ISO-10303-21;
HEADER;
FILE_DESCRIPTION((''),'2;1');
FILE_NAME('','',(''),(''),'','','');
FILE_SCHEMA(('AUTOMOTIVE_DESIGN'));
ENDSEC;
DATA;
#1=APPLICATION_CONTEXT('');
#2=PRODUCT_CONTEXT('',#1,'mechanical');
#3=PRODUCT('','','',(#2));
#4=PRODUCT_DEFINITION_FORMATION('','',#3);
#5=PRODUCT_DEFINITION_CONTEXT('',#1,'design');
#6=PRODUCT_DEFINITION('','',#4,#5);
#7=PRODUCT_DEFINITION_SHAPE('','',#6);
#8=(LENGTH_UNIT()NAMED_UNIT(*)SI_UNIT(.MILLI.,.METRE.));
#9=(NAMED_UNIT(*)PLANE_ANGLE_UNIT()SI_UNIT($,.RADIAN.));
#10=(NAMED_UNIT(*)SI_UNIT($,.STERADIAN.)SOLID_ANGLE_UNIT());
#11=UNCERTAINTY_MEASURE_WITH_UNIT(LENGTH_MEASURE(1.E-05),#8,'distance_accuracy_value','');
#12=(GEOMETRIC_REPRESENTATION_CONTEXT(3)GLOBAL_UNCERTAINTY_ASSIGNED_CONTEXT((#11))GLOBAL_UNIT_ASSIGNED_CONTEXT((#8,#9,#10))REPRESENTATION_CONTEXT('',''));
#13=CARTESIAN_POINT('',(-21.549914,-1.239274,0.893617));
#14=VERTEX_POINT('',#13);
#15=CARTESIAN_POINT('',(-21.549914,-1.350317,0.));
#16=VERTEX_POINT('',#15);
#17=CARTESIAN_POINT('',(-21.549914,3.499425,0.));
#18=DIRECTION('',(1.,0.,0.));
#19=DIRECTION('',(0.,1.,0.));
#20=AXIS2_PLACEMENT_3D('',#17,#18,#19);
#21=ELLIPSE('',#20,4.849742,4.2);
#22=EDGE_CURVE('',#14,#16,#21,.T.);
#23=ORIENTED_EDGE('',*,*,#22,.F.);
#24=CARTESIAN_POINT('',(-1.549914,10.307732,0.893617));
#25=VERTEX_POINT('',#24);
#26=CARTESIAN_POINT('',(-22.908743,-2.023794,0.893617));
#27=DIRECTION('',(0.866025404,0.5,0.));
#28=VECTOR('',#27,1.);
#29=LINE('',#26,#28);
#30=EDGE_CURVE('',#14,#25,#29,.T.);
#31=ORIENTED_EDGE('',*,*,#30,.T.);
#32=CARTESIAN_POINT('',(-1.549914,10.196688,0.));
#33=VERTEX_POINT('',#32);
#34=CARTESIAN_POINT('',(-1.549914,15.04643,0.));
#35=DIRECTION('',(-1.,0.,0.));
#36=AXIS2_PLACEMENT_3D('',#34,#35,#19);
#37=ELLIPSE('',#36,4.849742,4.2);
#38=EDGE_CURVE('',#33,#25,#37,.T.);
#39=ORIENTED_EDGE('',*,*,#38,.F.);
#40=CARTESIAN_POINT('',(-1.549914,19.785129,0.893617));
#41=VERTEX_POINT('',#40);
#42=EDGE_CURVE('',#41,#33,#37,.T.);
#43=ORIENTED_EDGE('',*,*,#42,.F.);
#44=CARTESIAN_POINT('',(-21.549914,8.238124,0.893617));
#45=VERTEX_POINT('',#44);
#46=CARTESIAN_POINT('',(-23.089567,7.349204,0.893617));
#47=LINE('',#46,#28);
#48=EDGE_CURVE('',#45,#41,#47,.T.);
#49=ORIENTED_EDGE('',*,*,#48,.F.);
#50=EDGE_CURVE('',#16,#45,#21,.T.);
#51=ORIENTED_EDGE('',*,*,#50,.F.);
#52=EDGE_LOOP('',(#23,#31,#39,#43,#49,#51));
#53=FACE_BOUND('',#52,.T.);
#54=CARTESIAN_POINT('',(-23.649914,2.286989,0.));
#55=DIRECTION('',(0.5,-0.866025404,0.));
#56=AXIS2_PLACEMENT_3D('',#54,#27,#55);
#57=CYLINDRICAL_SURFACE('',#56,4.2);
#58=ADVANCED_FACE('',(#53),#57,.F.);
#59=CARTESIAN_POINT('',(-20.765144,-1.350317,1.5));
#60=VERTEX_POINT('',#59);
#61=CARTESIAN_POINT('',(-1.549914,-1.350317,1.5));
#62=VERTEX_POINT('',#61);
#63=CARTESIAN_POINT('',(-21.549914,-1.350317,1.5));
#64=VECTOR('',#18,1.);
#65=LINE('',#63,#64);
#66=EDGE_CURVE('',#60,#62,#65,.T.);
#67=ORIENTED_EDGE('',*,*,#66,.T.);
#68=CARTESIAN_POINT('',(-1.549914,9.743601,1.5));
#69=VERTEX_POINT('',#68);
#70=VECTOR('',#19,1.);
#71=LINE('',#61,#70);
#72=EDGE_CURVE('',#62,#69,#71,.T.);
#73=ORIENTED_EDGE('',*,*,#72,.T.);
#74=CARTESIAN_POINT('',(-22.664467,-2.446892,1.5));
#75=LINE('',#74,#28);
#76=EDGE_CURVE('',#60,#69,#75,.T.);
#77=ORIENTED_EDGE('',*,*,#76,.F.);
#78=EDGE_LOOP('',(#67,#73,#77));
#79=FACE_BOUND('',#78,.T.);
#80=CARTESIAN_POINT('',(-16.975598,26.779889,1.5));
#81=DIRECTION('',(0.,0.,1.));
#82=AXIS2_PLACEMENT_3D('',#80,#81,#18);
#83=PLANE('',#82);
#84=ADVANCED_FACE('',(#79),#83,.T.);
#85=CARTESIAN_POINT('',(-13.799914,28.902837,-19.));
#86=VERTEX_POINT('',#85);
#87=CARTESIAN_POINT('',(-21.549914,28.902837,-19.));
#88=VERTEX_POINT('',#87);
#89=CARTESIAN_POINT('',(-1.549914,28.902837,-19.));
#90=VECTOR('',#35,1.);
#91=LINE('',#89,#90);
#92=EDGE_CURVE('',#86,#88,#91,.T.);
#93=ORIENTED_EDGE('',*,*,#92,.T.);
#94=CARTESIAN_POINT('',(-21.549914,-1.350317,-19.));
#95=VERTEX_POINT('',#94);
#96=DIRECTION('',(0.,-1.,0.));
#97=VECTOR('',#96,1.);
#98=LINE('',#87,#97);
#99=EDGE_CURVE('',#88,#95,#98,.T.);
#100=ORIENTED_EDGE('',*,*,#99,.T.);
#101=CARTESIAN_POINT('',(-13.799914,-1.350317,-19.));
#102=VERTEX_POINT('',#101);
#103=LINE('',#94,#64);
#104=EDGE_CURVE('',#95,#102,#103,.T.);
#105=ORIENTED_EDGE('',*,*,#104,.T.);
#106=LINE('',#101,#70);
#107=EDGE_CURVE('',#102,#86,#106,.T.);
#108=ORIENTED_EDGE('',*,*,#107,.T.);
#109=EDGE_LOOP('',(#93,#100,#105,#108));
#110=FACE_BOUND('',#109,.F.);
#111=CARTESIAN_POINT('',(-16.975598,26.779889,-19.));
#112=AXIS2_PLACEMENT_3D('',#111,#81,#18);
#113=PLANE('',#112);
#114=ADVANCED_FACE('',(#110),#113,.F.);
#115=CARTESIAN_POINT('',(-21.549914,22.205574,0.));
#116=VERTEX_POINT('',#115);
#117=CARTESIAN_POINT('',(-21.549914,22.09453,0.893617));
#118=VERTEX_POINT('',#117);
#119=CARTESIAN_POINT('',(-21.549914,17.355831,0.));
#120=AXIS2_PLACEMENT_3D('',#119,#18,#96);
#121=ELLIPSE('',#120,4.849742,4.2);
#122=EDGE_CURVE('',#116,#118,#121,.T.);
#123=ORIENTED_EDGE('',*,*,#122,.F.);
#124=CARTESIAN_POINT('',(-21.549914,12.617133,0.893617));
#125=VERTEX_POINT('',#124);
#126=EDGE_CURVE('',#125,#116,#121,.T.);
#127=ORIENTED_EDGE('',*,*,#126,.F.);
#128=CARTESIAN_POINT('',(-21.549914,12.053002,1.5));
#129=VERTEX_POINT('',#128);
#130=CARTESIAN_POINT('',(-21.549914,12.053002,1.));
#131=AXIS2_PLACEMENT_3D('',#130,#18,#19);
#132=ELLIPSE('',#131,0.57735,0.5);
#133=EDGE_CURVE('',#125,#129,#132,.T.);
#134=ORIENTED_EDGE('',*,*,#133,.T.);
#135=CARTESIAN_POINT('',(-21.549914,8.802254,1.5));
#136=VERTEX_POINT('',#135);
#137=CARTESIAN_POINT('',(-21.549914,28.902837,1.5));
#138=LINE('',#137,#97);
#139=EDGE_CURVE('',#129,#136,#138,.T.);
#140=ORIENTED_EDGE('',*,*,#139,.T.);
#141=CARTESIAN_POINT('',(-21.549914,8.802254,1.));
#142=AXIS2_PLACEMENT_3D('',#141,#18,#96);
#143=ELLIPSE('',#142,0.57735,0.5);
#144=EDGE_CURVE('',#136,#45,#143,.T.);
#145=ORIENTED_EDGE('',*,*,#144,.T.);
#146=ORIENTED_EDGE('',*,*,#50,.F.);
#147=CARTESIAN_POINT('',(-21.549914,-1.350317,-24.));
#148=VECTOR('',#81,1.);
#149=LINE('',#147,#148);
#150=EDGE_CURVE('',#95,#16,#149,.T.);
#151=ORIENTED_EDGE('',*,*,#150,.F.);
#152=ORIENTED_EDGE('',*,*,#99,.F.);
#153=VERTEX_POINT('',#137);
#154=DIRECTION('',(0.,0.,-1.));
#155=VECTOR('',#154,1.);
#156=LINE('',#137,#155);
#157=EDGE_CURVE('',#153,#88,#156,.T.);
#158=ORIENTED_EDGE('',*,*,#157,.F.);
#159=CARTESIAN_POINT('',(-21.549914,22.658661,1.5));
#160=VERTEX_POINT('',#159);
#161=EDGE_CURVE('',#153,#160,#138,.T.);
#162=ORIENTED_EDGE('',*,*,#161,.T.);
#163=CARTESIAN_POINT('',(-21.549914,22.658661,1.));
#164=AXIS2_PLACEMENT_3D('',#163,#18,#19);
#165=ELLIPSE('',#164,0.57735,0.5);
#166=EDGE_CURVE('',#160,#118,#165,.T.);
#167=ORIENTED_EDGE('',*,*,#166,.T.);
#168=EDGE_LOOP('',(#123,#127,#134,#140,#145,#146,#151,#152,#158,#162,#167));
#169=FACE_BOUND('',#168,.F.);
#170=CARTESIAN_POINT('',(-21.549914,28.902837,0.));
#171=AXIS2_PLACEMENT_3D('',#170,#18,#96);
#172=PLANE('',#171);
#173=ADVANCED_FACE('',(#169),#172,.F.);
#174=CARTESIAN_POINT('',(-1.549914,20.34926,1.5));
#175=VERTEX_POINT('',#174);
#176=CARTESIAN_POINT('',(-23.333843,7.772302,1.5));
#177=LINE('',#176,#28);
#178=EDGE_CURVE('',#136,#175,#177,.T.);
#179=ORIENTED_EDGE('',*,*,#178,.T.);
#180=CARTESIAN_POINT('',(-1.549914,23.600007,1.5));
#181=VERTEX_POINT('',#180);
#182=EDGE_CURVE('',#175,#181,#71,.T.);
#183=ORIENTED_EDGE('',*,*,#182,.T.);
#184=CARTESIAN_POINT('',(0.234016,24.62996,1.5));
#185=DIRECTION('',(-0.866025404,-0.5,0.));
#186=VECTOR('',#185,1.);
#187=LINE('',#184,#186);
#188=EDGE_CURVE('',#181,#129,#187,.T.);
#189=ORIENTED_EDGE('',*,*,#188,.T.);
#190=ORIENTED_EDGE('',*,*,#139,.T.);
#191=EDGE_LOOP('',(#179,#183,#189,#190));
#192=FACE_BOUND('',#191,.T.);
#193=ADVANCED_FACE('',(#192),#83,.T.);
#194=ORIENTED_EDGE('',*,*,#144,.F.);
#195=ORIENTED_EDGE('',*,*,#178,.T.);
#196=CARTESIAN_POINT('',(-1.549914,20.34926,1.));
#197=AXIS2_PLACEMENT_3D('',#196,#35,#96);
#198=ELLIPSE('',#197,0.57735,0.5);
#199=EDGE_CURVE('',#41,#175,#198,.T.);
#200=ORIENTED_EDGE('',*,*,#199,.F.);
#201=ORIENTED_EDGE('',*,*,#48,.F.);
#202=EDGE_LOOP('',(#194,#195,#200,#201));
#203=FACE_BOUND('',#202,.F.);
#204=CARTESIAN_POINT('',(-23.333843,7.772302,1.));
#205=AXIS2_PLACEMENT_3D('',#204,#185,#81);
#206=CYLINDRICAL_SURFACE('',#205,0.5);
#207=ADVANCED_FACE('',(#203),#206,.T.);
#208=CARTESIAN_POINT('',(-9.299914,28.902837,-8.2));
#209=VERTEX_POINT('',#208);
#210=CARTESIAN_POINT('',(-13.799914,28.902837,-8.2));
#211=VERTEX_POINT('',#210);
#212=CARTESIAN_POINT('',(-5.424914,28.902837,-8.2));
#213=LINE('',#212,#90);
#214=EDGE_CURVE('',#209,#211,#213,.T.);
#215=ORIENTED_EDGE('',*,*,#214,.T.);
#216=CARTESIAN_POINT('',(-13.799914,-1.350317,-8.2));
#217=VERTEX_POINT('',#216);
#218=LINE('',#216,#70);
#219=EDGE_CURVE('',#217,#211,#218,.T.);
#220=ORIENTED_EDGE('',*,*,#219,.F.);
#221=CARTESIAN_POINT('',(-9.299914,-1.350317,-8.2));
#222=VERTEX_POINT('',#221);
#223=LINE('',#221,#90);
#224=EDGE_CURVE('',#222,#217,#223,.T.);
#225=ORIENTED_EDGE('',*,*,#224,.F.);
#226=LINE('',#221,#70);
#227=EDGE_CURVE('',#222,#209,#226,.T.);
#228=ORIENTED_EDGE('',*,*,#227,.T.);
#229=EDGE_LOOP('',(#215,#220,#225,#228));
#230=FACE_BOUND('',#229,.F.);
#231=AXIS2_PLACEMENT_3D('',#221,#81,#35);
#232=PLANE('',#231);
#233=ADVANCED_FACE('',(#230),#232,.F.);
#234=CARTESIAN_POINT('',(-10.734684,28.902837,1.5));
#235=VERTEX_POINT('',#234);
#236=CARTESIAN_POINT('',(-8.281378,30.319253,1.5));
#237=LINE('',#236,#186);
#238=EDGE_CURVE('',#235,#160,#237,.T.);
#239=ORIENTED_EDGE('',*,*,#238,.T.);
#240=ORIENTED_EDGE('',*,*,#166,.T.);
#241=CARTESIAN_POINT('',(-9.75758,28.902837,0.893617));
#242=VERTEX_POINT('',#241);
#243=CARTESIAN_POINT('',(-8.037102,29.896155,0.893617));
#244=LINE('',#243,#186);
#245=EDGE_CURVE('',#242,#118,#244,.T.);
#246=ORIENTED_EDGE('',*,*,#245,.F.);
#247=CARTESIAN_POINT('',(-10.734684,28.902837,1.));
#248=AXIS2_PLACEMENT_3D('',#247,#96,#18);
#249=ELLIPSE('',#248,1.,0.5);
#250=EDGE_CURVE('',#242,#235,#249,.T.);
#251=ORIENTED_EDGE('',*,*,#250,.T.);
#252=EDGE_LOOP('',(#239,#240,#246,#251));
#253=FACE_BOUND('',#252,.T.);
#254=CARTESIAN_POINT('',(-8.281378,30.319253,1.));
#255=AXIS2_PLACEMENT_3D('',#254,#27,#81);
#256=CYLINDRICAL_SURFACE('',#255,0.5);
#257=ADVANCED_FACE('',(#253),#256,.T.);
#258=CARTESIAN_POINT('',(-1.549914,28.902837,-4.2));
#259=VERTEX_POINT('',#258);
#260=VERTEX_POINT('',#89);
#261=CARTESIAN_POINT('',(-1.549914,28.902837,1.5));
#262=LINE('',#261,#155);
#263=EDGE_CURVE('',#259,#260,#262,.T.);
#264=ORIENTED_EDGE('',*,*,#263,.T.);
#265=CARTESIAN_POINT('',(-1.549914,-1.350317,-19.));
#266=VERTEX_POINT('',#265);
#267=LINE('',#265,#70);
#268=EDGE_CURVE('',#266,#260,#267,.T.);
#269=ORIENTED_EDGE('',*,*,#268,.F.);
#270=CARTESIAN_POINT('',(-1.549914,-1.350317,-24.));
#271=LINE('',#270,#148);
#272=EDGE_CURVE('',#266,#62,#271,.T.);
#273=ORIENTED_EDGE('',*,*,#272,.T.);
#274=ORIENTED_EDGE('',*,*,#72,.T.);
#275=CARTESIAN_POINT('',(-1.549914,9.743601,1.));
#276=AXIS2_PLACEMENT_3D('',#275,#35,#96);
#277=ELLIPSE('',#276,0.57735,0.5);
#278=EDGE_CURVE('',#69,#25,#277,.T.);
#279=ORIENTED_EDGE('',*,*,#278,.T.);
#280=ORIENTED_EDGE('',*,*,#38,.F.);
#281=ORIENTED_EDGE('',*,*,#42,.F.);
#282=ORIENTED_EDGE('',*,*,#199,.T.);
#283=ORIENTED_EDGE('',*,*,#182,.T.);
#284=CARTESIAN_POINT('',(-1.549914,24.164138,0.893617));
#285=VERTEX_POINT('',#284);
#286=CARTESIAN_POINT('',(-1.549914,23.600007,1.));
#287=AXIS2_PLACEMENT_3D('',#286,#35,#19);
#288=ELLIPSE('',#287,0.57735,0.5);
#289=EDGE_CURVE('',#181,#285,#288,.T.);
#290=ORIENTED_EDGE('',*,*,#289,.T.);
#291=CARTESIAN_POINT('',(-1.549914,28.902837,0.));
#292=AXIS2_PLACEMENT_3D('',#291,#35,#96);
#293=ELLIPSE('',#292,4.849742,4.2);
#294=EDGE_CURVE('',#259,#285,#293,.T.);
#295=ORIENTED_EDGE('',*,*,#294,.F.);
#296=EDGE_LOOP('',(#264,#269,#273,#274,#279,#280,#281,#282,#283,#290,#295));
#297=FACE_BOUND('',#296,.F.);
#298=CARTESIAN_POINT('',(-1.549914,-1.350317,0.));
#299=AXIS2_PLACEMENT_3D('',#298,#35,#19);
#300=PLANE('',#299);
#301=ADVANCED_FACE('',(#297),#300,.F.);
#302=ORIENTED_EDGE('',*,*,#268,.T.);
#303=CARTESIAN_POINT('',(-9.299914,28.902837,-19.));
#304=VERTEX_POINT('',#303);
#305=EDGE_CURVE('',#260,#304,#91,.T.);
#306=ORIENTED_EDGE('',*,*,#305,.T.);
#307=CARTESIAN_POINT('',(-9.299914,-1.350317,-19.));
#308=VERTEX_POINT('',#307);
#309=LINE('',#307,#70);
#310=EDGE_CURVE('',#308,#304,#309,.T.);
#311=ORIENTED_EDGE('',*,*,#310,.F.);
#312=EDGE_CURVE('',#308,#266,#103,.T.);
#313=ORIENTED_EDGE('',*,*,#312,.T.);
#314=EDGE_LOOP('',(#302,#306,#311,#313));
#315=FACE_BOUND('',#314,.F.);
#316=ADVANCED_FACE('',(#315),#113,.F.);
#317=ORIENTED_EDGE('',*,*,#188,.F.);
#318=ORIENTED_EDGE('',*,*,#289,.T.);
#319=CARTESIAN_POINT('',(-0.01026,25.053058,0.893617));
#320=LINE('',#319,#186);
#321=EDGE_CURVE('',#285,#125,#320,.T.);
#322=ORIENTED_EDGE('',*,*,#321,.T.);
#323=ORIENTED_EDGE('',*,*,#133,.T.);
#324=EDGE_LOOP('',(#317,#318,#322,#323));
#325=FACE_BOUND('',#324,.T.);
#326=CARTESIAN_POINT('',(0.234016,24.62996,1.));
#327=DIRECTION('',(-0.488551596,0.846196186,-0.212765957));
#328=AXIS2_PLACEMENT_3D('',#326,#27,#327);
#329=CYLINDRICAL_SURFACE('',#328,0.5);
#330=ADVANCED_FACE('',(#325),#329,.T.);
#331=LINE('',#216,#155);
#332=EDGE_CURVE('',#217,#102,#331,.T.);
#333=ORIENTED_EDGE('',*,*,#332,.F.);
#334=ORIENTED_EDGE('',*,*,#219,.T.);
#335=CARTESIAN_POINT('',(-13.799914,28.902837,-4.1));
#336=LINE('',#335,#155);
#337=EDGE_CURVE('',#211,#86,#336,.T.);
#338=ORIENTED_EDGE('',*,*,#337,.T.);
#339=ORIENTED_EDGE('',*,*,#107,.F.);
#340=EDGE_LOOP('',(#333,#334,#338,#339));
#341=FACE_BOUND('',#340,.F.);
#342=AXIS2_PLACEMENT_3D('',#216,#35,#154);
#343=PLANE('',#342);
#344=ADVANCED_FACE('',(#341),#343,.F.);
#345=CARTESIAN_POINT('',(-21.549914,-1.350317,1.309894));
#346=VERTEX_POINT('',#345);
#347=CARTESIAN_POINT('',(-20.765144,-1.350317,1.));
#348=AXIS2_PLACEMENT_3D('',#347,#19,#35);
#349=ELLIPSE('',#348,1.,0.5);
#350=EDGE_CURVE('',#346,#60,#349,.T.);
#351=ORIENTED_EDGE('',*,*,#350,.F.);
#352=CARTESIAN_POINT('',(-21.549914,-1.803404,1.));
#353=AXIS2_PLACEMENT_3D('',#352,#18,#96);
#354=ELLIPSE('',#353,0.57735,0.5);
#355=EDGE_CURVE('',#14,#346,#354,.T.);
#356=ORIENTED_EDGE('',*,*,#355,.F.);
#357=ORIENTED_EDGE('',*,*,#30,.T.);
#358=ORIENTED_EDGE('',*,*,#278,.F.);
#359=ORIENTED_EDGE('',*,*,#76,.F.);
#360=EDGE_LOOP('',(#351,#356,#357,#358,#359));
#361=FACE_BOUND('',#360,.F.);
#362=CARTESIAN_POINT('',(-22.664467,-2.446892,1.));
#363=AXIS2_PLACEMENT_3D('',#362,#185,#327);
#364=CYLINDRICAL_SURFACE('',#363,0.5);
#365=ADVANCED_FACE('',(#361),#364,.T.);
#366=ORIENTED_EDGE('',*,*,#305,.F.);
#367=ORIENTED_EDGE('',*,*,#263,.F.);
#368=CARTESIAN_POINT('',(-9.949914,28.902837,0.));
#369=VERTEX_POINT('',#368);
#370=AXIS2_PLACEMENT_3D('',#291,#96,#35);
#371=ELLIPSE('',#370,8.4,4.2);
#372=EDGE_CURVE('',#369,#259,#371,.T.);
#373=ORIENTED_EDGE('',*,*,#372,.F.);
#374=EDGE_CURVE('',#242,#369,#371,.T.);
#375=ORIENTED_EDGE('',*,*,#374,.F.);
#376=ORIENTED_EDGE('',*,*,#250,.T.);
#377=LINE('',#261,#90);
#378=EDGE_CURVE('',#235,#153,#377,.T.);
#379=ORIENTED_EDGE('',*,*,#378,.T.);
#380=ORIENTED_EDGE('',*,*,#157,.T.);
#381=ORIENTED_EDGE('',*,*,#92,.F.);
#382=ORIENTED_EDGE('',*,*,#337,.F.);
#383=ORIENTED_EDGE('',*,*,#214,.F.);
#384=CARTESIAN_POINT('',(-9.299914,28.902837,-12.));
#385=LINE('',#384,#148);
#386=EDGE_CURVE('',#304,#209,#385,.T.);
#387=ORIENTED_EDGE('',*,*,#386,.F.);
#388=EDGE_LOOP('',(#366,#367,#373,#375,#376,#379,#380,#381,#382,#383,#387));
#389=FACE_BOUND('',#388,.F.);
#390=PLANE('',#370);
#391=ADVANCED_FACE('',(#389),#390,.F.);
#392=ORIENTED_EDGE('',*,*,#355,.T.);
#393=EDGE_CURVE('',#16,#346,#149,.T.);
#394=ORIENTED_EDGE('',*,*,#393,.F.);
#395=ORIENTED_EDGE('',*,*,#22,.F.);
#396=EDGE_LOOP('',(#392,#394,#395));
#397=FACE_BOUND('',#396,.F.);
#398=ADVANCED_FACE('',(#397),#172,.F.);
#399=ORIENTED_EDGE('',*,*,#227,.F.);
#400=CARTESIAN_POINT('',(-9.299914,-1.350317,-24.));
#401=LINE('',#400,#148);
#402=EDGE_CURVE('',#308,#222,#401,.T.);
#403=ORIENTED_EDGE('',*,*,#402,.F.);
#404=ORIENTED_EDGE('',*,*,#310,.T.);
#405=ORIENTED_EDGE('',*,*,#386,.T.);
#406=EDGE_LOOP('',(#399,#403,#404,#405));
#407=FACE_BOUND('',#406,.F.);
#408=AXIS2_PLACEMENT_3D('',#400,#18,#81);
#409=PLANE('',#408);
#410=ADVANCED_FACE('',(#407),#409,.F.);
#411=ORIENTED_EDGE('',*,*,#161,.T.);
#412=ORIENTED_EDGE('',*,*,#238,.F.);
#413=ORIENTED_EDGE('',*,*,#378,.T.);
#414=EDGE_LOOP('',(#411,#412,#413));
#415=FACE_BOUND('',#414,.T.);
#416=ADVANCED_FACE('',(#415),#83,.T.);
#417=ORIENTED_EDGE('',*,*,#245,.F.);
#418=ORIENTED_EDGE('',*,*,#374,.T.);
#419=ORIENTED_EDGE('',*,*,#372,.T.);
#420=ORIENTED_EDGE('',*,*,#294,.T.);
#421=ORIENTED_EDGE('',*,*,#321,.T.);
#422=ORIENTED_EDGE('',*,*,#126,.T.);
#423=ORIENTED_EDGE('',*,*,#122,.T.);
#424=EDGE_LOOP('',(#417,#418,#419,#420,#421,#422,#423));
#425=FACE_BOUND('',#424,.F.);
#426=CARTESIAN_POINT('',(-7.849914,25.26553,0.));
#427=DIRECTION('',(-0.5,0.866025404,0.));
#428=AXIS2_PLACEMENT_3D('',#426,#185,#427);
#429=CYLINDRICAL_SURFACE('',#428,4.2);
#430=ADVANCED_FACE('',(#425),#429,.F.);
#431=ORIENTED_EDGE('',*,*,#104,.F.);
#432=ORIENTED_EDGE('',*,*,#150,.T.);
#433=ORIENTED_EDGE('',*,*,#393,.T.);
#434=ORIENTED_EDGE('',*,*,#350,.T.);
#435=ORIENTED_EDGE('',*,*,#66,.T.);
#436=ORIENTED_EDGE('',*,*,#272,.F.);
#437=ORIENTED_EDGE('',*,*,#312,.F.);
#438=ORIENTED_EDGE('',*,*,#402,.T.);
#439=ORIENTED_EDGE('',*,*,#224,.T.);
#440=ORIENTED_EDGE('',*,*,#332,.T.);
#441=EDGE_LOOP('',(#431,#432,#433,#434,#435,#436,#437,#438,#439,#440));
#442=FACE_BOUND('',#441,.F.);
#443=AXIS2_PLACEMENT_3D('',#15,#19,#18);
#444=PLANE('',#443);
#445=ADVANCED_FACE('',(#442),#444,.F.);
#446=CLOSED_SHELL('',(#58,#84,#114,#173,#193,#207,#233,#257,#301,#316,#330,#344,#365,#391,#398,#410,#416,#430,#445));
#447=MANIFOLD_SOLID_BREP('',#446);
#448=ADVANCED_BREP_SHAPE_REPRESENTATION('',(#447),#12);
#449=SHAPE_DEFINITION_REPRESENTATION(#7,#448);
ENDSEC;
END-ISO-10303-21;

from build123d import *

# Parameters (mm, degrees)
F1_DEPTH      = 24
F1_DEPTH_BACK = 1.5
F4_T1_DEPTH   = 17.3810892057
F4_T3_DEPTH   = 26.4408905281
F4_T5_DEPTH   = 26.4408905281
F4_T7_DEPTH   = 26.4408905281
F6_DEPTH      = 43.7
F7_DEPTH      = 5


# Not quite as in the source:
# - a fillet or chamfer that OpenCascade refuses, or shapes differently, is made with other operations: its cross-section is extruded or revolved along the edge and cut away or added
# - a feature names something its author has since deleted; it is built from what else it names


with BuildPart() as f1:
    # F0 (on Top) → F1 (new body, two sides)
    with BuildSketch(Plane.XY) as f1_sk:
        Polygon((-9.9499136187, 28.9028368274), (-21.5499136187, 28.9028368274), (-21.5499136187, 22.2055737048), align=None)
        Polygon((-1.5499136187, 28.9028368274), (-9.9499136187, 28.9028368274), (-21.5499136187, 22.2055737048), (-21.5499136187, 17.3558314436), align=None)
        Polygon((-1.5499136187, 21.9746335971), (-1.5499136187, 28.9028368274), (-21.5499136187, 17.3558314436), (-21.5499136187, 10.4276282133), align=None)
        Polygon((-1.5499136187, 15.0464303668), (-1.5499136187, 21.9746335971), (-21.5499136187, 10.4276282133), (-21.5499136187, 3.499424983), align=None)
        Polygon((-1.5499136187, -1.3503172782), (-1.5499136187, 10.1966881056), (-21.5499136187, -1.3503172782), align=None)
        Polygon((-1.5499136187, 10.1966881056), (-1.5499136187, 15.0464303668), (-21.5499136187, 3.499424983), (-21.5499136187, -1.3503172782), align=None)
    extrude(amount=-F1_DEPTH)
    extrude(f1_sk.sketch, amount=F1_DEPTH_BACK)

    # F0 (on Top) → F2 (revolve, cut)
    with BuildSketch(Plane.XY):
        Polygon((-21.5499136187, 17.3558314436), (-21.5499136187, 22.2055737048), (-34.8505816362, 14.5264294445), (-32.7505816362, 10.8891227486), align=None)
        Polygon((-1.5499136187, 28.9028368274), (-9.9499136187, 28.9028368274), (-21.5499136187, 22.2055737048), (-21.5499136187, 17.3558314436), align=None)
        Polygon((0, 34.6474221335), (-9.9499136187, 28.9028368274), (-1.5499136187, 28.9028368274), (2.1, 31.0101154376), align=None)
    revolve(axis=Axis((-15.3252908181, 20.9496190931, 0), (-0.8660254038, -0.5, 0)), mode=Mode.SUBTRACT)

    # F0 (on Top) → F3 (revolve, cut)
    with BuildSketch(Plane.XY):
        Polygon((-21.5499136187, -1.3503172782), (-21.5499136187, 3.499424983), (-26.7505816362, 0.4968179032), (-24.6505816362, -3.1404887927), align=None)
        Polygon((-1.5499136187, 10.1966881056), (-1.5499136187, 15.0464303668), (-21.5499136187, 3.499424983), (-21.5499136187, -1.3503172782), align=None)
        Polygon((8.1, 20.6178105922), (-1.5499136187, 15.0464303668), (-1.5499136187, 10.1966881056), (10.2, 16.9805038963), align=None)
    revolve(axis=Axis((-9.3252908181, 10.5573142477, 0), (-0.8660254038, -0.5, 0)), mode=Mode.SUBTRACT)

    # F4: fillet of radius 0.5 on 4 edges, made by hand

    # F4_s2 → F4_t1 (cut)
    with BuildSketch(Plane(origin=(6.9175881272, 3.9938713674, 0), x_dir=(0, 0, 1), z_dir=(-0.8660254038, -0.5, 0))):
        with BuildLine():
            ThreePointArc((1.5, 30.3979327446), (1.3136945255, 30.0085797625), (0.8936170213, 29.9093811487))
            ThreePointArc((0.8936170213, 29.9093811487), (1.2002187189, 29.8304048869), (1.5, 29.7285567925))
            Line((1.5, 29.7285567925), (1.5, 30.3979327446))
        make_face()
    extrude(amount=F4_T1_DEPTH, mode=Mode.SUBTRACT)

    # F4_s4 → F4_t3 (cut)
    with BuildSketch(Plane(origin=(10.8405971764, 6.258821698, 0), x_dir=(0, 0, 1), z_dir=(-0.8660254038, -0.5, 0))):
        with BuildLine():
            ThreePointArc((0.8936170213, 21.7017143379), (1.3136945255, 21.6025157241), (1.5, 21.213162742))
            Line((1.5, 21.213162742), (1.5, 21.8825386941))
            ThreePointArc((1.5, 21.8825386941), (1.2002187189, 21.7806905996), (0.8936170213, 21.7017143379))
        make_face()
    extrude(amount=F4_T3_DEPTH, mode=Mode.SUBTRACT)

    # F4_s6 → F4_t5 (cut)
    with BuildSketch(Plane(origin=(-14.1348766704, -8.1607748506, 0), x_dir=(0, 0, 1), z_dir=(0.8660254038, 0.5, 0))):
        with BuildLine():
            ThreePointArc((1.5, -18.3979327446), (1.3136945255, -18.0085797625), (0.8936170213, -17.9093811487))
            ThreePointArc((0.8936170213, -17.9093811487), (1.2002187189, -17.8304048869), (1.5, -17.7285567925))
            Line((1.5, -17.7285567925), (1.5, -18.3979327446))
        make_face()
    extrude(amount=F4_T5_DEPTH, mode=Mode.SUBTRACT)

    # F4_s8 → F4_t7 (cut)
    with BuildSketch(Plane(origin=(-18.0578857196, -10.4257251812, 0), x_dir=(0, 0, 1), z_dir=(0.8660254038, 0.5, 0))):
        with BuildLine():
            ThreePointArc((0.8936170213, -9.7017143379), (1.3136945255, -9.6025157241), (1.5, -9.213162742))
            Line((1.5, -9.213162742), (1.5, -9.8825386941))
            ThreePointArc((1.5, -9.8825386941), (1.2002187189, -9.7806905996), (0.8936170213, -9.7017143379))
        make_face()
    extrude(amount=F4_T7_DEPTH, mode=Mode.SUBTRACT)

    # F5 (on face) → F6 (cut)
    with BuildSketch(Plane.XZ.offset(1.3503172782)):
        Polygon((-13.7999136187, -26.7), (-9.2999136187, -26.7), (-9.8499136187, -24), (-13.2499136187, -24), align=None)
        Polygon((-9.8499136187, -24), (-9.2999136187, -24), (-9.2999136187, -8.2), (-13.7999136187, -8.2), (-13.7999136187, -24), (-13.2499136187, -24), align=None)
    extrude(amount=-F6_DEPTH, mode=Mode.SUBTRACT)

    # F7 (cut): faces of the model
    f7_faces = [f1.faces().sort_by_distance(p)[0] for p in [
        (-17.6749136187, 13.7762597746, -24),
        (-5.4249136187, 13.7762597746, -24),
    ]]
    extrude(f7_faces, amount=-F7_DEPTH, mode=Mode.SUBTRACT)


solid = f1.part
